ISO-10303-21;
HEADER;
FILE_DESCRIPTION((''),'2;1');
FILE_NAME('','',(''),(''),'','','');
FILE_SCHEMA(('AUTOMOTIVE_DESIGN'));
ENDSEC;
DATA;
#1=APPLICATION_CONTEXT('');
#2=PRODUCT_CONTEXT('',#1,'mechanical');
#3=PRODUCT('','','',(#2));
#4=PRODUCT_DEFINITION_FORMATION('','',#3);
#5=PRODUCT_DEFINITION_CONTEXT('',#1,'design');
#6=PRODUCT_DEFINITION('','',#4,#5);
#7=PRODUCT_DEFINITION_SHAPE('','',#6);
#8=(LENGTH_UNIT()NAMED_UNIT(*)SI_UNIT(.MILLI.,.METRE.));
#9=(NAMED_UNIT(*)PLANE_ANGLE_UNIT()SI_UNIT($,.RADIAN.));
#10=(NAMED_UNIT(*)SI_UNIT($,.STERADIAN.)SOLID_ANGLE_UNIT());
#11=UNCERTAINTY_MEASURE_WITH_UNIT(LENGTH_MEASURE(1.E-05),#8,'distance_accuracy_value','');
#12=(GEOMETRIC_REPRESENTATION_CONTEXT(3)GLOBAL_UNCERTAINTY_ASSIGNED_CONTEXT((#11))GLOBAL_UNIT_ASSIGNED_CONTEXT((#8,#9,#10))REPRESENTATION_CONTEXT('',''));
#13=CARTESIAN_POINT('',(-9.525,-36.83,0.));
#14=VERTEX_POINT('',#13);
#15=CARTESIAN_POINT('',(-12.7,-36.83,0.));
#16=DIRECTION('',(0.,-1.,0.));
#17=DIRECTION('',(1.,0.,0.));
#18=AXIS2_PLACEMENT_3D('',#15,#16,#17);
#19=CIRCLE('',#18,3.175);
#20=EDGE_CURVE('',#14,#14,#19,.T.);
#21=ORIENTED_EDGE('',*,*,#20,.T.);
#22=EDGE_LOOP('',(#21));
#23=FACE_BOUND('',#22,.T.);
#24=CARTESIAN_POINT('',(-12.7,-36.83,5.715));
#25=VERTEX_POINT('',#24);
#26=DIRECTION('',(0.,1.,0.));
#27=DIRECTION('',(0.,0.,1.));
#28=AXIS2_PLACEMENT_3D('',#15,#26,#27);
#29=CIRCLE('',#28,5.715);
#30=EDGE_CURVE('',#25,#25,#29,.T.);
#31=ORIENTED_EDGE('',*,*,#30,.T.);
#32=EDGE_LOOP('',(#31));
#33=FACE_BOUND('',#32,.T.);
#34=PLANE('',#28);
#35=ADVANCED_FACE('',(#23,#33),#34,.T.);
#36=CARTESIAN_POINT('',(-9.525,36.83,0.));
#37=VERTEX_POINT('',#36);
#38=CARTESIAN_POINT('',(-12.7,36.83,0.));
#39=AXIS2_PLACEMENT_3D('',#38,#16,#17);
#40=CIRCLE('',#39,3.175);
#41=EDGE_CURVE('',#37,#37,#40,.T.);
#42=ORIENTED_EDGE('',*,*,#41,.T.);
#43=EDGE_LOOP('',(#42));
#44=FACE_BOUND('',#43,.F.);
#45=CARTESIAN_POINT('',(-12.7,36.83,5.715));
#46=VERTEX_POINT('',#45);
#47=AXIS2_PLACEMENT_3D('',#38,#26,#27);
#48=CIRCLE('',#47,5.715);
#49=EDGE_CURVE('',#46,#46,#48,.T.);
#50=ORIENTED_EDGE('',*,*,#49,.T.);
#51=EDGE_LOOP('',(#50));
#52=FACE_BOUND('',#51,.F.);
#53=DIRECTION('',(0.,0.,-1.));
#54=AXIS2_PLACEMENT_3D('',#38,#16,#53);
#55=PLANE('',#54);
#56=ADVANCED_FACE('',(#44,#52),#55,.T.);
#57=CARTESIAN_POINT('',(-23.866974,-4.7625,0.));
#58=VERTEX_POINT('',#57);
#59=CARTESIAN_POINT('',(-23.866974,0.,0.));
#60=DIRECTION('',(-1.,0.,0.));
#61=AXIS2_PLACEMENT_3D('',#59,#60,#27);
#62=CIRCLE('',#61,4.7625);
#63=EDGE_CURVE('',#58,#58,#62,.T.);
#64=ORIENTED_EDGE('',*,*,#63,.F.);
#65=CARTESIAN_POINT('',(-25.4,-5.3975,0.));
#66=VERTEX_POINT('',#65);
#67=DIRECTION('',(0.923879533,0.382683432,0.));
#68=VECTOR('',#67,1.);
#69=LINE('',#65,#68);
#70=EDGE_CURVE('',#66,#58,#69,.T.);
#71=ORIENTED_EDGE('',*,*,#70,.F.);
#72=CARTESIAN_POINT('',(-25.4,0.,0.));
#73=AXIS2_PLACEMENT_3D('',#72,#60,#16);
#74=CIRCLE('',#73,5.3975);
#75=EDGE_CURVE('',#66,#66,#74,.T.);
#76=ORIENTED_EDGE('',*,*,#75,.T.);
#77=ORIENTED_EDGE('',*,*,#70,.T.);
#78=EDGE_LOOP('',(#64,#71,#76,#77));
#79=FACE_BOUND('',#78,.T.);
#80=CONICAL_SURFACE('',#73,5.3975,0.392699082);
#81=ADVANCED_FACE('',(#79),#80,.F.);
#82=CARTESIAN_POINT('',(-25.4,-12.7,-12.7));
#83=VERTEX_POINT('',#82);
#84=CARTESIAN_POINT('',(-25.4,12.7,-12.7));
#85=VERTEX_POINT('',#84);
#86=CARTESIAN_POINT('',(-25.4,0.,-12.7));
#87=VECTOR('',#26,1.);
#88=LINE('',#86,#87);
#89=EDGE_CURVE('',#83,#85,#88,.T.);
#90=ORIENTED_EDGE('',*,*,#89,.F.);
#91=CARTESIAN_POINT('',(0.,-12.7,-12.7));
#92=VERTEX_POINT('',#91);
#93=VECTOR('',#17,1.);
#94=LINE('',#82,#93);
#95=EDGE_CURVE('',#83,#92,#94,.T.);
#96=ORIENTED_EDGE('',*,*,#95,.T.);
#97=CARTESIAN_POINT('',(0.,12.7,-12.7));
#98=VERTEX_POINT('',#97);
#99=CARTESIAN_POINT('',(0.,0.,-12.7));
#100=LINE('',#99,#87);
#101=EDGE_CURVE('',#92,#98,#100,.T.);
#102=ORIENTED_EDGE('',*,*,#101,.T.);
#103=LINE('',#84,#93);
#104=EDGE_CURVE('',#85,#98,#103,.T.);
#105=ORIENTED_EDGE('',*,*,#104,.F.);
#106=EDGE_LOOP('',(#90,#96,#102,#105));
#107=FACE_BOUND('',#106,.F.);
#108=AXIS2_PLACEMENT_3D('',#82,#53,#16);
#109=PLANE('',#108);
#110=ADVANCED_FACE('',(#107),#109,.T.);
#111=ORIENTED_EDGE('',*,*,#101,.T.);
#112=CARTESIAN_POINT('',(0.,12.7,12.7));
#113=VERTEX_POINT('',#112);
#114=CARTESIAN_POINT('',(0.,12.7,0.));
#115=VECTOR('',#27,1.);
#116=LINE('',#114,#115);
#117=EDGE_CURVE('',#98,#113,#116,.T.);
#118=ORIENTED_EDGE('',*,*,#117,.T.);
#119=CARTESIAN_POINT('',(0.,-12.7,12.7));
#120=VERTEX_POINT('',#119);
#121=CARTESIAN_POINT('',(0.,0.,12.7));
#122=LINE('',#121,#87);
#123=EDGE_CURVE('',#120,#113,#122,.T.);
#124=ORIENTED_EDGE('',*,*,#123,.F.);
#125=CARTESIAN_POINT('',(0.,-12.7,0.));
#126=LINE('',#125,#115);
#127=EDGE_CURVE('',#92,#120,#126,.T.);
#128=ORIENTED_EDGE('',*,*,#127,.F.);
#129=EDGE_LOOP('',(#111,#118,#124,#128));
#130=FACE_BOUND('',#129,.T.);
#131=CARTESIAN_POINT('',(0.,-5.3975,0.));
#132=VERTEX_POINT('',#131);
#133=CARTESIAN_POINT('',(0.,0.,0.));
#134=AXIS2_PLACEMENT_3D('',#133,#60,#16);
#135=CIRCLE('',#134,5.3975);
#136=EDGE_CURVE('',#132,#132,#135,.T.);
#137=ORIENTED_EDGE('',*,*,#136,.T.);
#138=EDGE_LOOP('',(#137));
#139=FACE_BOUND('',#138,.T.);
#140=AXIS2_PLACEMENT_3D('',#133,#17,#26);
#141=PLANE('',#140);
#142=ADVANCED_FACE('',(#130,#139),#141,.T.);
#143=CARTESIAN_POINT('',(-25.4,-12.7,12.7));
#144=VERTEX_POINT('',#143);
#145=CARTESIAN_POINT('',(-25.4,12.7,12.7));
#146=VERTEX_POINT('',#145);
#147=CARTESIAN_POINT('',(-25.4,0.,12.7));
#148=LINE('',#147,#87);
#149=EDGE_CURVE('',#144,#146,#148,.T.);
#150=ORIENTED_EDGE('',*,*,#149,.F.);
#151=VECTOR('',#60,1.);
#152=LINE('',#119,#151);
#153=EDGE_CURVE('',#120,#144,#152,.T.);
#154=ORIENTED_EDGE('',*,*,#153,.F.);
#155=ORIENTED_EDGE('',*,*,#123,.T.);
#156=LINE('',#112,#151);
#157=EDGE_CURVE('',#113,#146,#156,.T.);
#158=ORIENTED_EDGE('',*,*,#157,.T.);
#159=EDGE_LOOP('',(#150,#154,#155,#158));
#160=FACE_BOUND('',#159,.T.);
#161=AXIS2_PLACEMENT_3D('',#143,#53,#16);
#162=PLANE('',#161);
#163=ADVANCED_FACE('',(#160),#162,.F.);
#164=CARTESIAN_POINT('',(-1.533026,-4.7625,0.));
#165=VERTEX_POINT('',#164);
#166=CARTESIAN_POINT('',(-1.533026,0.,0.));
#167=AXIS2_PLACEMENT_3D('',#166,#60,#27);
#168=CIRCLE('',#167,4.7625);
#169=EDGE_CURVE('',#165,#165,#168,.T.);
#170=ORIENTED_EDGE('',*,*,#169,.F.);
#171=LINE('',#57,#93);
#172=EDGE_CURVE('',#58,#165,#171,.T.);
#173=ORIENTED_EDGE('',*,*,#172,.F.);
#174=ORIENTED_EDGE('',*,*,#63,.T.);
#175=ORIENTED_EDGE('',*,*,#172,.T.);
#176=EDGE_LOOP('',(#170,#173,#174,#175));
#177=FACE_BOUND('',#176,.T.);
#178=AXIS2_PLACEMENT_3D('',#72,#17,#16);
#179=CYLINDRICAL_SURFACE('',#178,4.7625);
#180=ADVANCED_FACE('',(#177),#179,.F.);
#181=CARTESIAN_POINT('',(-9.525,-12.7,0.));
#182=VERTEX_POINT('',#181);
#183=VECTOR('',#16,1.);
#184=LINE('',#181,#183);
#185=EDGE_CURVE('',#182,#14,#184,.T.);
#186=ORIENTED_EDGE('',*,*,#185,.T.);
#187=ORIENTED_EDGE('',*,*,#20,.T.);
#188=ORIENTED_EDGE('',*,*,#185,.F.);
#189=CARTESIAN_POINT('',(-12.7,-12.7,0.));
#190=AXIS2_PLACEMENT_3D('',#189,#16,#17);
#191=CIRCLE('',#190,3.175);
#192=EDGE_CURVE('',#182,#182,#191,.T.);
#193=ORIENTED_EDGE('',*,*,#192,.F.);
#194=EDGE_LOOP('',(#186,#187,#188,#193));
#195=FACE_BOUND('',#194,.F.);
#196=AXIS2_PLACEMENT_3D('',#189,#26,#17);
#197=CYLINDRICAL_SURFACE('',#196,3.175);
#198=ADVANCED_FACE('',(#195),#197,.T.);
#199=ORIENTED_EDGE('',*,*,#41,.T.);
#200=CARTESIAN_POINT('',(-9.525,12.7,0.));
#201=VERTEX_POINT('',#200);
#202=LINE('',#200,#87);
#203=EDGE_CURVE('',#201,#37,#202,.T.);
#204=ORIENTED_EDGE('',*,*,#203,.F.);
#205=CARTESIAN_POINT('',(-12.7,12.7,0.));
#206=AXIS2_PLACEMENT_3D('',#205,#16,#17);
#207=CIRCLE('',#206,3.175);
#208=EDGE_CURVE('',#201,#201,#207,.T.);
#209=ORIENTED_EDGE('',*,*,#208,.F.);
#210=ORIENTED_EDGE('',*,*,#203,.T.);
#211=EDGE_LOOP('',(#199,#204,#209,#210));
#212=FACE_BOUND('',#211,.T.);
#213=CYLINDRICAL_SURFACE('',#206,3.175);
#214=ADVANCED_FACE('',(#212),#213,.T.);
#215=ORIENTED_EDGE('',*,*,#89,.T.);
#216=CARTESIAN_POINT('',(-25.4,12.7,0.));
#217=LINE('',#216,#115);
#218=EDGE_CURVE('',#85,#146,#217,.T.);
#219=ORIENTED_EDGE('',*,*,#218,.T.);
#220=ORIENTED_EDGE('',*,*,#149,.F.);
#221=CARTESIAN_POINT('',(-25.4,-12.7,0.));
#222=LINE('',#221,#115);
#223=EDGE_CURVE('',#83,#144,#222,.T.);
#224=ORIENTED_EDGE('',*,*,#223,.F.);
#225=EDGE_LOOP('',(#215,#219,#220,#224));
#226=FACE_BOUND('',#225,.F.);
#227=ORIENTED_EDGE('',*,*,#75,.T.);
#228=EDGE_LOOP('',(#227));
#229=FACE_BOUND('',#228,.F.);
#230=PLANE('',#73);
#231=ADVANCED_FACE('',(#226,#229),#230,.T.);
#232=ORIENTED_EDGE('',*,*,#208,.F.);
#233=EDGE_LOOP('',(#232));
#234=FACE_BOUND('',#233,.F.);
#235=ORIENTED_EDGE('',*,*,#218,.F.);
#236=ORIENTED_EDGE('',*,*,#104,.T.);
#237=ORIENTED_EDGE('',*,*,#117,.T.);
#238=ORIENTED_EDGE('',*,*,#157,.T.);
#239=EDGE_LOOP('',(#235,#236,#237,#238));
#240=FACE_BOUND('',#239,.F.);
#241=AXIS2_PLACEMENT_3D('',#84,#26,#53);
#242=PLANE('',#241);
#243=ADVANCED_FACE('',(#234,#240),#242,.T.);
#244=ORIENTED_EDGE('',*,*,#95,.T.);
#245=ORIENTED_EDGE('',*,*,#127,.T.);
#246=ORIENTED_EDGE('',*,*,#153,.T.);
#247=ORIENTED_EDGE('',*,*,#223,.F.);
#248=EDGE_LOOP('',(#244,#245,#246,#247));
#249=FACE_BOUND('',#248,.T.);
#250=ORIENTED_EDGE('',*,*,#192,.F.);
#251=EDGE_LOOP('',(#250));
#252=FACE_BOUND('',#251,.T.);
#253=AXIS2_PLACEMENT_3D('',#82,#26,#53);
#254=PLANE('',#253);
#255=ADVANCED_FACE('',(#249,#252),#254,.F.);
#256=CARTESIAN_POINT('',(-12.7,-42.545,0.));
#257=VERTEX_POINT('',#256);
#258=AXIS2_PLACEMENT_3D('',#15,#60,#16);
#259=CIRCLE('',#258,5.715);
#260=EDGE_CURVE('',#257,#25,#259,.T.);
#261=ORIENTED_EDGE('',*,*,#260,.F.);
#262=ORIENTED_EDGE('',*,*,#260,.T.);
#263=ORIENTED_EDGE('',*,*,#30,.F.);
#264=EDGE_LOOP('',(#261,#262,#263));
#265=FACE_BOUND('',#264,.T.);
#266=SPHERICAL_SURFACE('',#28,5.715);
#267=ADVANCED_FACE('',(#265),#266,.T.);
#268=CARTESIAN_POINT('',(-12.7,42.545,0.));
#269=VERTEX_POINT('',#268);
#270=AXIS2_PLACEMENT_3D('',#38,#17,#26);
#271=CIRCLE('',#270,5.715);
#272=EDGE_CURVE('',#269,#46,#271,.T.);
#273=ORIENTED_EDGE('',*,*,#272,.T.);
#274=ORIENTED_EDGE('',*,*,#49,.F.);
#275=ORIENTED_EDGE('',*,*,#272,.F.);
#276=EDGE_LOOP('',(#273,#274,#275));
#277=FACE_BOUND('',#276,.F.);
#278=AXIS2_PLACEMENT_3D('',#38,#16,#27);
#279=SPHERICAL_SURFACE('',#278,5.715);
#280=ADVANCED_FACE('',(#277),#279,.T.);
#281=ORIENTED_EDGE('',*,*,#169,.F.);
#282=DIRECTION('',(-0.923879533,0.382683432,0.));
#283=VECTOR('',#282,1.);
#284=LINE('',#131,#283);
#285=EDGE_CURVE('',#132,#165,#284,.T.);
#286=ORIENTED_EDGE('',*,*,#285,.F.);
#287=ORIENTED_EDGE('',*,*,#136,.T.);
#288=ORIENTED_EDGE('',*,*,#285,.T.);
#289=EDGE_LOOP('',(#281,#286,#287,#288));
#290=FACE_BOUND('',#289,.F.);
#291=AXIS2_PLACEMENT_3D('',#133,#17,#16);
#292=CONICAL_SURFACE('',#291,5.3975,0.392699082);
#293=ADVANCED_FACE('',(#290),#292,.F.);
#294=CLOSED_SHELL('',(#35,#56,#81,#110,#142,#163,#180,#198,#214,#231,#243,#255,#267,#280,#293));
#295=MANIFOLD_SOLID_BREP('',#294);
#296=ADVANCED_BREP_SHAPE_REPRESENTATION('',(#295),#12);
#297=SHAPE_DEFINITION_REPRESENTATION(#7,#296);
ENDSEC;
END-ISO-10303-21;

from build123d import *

# Parameters (mm, degrees)
F0_W           = 25.4
F0_H           = 25.4
F1_DEPTH       = 12.7
F3_D           = 9.525
F3_CSINK_D     = 10.795
F3_CSINK_ANGLE = 45
F5_R           = 3.175
F6_DEPTH       = 24.13


# Not quite as in the source:
# - a pattern or mirror of a feature is missing from the dataset's text; its kind, count and spacing are read off the source's solid


with BuildPart() as f1:
    # F0 (on Right) → F1 (new body)
    with BuildSketch(Plane.YZ):
        Rectangle(F0_W, F0_H)
    extrude(amount=-F1_DEPTH)

    # F3 (through all)
    with Locations(Plane.YZ):
        with Locations((0, 0)):
            CounterSinkHole(F3_D / 2, F3_CSINK_D / 2, counter_sink_angle=F3_CSINK_ANGLE)

    # F4: F1 across face


with BuildPart() as f1_1:
    add(f1.part)
    add(f1.part.mirror(Plane(origin=(-12.7, 0, 0), x_dir=(0, 1, 0), z_dir=(-1, 0, 0))))

    # F5 (on face) → F6 (join)
    with BuildSketch(Plane.XZ.offset(12.7)):
        with Locations((-12.7, 0)):
            Circle(F5_R)
    f6 = extrude(amount=F6_DEPTH)

    # F6_copies: F6 across plane
    add(f6.mirror(Plane.ZX))

    # F8 (on offset) → F9 (revolve)
    with BuildSketch(Plane(origin=(-12.7, 0, 0), x_dir=(0, -1, 0), z_dir=(-1, 0, 0))):
        with BuildLine():
            Line((36.83, 5.715), (36.83, 3.175))
            Line((36.83, 3.175), (36.83, 0))
            Line((36.83, 0), (42.545, 0))
            ThreePointArc((42.545, 0), (40.8711152545, 4.0411152545), (36.83, 5.715))
        make_face()
    f9 = revolve(axis=Axis((-12.7, -39.6875, 0), (0, 1, 0)))

    # F9_copies: F9 across plane
    add(f9.mirror(Plane.ZX))


solid = f1_1.part
